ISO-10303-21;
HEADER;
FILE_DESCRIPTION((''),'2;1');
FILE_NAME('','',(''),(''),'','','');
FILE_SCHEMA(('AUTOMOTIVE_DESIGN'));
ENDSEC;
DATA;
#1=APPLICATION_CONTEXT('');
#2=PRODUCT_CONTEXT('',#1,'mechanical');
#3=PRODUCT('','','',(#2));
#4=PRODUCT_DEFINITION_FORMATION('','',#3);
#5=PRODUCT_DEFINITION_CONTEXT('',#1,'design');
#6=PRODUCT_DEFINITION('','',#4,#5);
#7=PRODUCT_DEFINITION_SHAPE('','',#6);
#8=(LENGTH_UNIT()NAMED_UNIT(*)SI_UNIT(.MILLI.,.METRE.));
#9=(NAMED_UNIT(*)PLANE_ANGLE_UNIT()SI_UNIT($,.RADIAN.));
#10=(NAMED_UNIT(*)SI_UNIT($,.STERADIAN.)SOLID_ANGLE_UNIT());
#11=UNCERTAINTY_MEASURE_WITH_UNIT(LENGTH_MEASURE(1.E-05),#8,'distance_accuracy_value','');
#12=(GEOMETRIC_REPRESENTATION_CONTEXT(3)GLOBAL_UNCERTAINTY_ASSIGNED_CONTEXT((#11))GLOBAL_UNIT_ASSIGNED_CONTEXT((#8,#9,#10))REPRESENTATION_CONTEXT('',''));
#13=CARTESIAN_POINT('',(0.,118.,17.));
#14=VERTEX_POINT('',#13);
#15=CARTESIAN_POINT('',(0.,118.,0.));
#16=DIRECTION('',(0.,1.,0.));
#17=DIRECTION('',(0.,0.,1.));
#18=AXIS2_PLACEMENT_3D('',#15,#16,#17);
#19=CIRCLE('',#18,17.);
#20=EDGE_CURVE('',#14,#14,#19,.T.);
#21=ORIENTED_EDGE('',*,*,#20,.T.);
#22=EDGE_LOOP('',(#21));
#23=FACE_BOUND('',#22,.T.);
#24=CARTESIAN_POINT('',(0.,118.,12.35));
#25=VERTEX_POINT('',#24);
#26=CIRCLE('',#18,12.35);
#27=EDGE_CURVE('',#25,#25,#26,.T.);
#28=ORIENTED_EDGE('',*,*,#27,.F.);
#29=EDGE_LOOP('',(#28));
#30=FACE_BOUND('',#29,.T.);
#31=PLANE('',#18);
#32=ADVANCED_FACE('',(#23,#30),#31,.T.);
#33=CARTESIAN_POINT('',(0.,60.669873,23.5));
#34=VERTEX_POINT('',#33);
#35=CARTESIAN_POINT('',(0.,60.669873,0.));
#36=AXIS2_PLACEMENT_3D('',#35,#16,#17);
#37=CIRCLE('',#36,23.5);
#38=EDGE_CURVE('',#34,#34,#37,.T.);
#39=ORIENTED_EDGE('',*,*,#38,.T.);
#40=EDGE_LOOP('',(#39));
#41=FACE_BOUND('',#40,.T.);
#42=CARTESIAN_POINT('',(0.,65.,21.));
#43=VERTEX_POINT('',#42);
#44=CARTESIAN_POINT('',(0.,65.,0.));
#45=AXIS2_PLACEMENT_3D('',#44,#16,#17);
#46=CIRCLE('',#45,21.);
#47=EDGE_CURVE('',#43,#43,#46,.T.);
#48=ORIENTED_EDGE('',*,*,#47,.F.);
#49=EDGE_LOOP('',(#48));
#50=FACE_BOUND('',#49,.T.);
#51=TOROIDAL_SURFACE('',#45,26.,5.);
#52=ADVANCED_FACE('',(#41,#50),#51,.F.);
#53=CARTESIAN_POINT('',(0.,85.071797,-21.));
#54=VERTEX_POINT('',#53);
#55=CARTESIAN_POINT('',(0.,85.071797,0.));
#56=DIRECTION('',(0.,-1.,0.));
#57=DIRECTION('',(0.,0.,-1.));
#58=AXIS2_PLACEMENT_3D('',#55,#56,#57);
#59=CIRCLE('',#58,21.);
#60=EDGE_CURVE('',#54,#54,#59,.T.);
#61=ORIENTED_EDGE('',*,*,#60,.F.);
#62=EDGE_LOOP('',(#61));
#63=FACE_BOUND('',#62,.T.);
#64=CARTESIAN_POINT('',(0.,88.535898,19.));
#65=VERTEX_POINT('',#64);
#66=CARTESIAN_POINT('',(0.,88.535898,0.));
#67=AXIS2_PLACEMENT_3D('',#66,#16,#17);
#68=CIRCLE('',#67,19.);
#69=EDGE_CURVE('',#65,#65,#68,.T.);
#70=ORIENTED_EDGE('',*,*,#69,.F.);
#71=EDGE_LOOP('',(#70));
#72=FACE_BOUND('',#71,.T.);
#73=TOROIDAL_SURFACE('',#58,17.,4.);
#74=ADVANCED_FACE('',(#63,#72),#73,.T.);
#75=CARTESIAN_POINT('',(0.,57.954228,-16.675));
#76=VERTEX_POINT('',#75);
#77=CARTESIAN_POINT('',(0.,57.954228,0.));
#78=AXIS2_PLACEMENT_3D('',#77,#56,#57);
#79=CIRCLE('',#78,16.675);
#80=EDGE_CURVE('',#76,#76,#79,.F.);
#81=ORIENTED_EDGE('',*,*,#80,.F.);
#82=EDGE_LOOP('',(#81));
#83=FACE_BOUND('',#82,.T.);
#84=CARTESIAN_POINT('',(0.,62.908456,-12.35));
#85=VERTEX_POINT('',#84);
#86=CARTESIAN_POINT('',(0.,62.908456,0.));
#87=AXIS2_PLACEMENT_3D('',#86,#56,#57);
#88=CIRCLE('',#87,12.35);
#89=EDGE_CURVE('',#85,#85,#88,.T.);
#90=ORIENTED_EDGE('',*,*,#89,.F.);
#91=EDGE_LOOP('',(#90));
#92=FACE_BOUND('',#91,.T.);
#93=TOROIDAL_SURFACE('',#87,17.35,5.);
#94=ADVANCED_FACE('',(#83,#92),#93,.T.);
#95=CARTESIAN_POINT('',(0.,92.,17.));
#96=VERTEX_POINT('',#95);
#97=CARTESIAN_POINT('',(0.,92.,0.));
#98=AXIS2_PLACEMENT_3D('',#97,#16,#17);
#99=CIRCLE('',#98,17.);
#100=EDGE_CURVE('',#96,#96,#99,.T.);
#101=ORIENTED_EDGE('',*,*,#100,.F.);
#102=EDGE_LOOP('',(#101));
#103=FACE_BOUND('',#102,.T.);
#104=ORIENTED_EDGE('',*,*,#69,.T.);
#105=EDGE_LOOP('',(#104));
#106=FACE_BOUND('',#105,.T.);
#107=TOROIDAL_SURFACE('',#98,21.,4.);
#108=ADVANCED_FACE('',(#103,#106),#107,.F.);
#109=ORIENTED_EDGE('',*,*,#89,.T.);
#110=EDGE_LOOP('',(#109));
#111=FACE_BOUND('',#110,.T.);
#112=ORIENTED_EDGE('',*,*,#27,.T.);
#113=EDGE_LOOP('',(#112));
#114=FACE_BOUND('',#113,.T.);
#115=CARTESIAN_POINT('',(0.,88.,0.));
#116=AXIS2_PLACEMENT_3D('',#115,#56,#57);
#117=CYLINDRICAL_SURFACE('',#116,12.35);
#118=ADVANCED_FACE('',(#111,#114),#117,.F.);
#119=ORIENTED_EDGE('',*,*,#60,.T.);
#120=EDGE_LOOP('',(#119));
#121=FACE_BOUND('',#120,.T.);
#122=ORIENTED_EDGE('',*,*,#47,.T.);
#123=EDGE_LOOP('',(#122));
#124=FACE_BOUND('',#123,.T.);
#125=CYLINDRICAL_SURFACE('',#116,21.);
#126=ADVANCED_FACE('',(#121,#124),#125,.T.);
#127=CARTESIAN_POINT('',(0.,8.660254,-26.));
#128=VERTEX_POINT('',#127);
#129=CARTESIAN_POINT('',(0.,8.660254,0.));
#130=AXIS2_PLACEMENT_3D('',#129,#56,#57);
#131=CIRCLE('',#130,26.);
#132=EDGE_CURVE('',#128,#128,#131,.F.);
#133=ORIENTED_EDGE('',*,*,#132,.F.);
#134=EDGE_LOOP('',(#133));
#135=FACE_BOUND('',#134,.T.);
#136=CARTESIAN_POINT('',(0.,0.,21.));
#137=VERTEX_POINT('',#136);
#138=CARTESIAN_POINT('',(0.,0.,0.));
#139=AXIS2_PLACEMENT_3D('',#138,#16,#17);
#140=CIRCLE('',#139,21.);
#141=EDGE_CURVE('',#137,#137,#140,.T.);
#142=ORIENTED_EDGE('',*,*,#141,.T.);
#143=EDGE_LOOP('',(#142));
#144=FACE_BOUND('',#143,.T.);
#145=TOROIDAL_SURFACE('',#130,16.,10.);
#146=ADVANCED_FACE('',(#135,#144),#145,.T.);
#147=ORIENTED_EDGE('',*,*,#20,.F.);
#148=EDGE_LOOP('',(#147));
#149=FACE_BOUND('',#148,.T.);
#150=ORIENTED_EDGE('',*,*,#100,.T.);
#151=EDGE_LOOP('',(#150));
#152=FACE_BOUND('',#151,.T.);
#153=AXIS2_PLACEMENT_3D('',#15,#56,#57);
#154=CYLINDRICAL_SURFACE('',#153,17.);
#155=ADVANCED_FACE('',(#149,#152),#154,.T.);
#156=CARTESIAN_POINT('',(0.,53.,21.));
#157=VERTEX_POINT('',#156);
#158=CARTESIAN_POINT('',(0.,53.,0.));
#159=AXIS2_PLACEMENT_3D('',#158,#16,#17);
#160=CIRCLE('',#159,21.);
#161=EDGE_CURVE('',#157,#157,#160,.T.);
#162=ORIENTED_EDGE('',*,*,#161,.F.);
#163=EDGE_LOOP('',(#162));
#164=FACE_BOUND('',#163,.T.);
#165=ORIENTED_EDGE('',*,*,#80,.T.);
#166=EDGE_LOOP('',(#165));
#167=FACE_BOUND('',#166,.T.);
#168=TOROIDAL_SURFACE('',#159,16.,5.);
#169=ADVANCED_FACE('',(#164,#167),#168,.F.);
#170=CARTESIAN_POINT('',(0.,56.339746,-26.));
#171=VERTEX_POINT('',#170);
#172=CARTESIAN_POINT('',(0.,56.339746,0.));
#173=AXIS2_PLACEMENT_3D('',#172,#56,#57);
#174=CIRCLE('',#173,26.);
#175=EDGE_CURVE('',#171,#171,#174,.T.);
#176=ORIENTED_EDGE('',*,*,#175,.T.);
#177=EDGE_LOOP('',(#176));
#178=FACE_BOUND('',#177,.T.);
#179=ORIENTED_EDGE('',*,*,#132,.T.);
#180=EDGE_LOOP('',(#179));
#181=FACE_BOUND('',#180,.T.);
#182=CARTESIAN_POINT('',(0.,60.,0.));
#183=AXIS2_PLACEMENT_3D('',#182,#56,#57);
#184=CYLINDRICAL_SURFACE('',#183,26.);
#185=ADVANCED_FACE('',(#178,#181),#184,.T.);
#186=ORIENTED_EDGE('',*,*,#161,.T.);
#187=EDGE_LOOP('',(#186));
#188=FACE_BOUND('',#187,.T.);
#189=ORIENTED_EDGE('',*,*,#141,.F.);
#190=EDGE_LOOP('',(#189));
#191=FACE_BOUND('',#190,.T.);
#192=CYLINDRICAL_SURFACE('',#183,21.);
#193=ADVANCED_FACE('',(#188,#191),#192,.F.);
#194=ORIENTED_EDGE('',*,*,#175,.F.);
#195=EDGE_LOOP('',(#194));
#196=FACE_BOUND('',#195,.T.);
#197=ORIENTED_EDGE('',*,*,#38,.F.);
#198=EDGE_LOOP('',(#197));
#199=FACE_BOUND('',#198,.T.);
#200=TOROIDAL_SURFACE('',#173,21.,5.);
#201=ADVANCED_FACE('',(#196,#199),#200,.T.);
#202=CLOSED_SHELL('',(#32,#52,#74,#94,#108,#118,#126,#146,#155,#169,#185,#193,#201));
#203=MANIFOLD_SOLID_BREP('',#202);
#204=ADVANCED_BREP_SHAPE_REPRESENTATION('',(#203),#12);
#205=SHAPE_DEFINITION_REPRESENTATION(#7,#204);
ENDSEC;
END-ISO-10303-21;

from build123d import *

# Parameters (mm, degrees)
SKETCH_1_R      = 26
SKETCH_1_R_2    = 21
EXTRUDE_1_DEPTH = 60
FILLET_1_R      = 10
EXTRUDE_START   = -2
SKETCH_2_R      = 21
SKETCH_2_R_2    = 12.35
EXTRUDE_2_DEPTH = 30
SKETCH_3_R      = 17
SKETCH_3_R_2    = 12.35
EXTRUDE_3_DEPTH = 30
FILLET_3_R      = 4
FILLET_4_R      = 4
FILLET_6_R      = 5
FILLET_7_R      = 5
FILLET_8_R      = 5
FILLET_9_R      = 5


# Some blends are built 0.0001 mm under size
with BuildPart() as part:
    # Эскиз1 → Вытянуть1 (new body)
    with BuildSketch(Plane(origin=(0, 0, 0), x_dir=(1, 0, 0), z_dir=(0, 1, 0))):
        with Locations(Location((0, 0, 0), (0, 0, 270))):
            Circle(SKETCH_1_R)
        with Locations(Location((0, 0, 0), (0, 0, 270))):
            Circle(SKETCH_1_R_2, mode=Mode.SUBTRACT)
    extrude(amount=EXTRUDE_1_DEPTH)

    # Скругление1
    # the kernel refuses this fillet: 10 mm, written as the material it takes off along each edge
    with BuildSketch(Plane(origin=(0, 0, 0), x_dir=(0, 0, 1), z_dir=(-1, 0, 0))) as fillet_1_piece_1:
        with BuildLine():
            CenterArc((16, 8.660254038), FILLET_1_R, 300, 60)
            Line((21, 0), (21.1, -0.173205081))
            ThreePointArc((21.1, -0.173205081), (23.5, -0.2), (26, -0.2))
            Line((26, -0.2), (26.2, 0))
            Line((26.2, 0), (26.2, 8.660254038))
            Line((26.2, 8.660254038), (26, 8.660254038))
        make_face()
    revolve(axis=Axis((0, 0, 0), (0, 1, 0)), mode=Mode.SUBTRACT)

    # Эскиз2 → Вытянуть2 (add)
    with BuildSketch(Plane(origin=(0, 60, 0), x_dir=(1, 0, 0), z_dir=(0, 1, 0)).offset(EXTRUDE_START)):
        with Locations(Location((0, 0, 0), (0, 0, 270))):
            Circle(SKETCH_2_R)
        with Locations(Location((0, 0, 0), (0, 0, 270))):
            Circle(SKETCH_2_R_2, mode=Mode.SUBTRACT)
    extrude(amount=EXTRUDE_2_DEPTH)

    # Эскиз3 → Вытянуть3 (add)
    with BuildSketch(Plane(origin=(0, 88, 0), x_dir=(1, 0, 0), z_dir=(0, 1, 0))):
        with Locations(Location((0, 0, 0), (0, 0, 270))):
            Circle(SKETCH_3_R)
        with Locations(Location((0, 0, 0), (0, 0, 270))):
            Circle(SKETCH_3_R_2, mode=Mode.SUBTRACT)
    extrude(amount=EXTRUDE_3_DEPTH)

    # Скругление3
    fillet_3_edges = [part.edges().sort_by_distance(p)[0] for p in [
        (0, 88, -17),
    ]]
    fillet(fillet_3_edges, radius=FILLET_3_R - 0.0001)  # a hair under: the kernel refuses the full size

    # Скругление4
    fillet_4_edges = [part.edges().sort_by_distance(p)[0] for p in [
        (0, 88, -21),
    ]]
    fillet(fillet_4_edges, radius=FILLET_4_R)

    # Скругление6
    fillet_6_edges = [part.edges().sort_by_distance(p)[0] for p in [
        (0, 60, -21),
    ]]
    fillet(fillet_6_edges, radius=FILLET_6_R - 0.0001)  # a hair under: the kernel refuses the full size

    # Скругление7
    fillet_7_edges = [part.edges().sort_by_distance(p)[0] for p in [
        (0, 60, -26),
    ]]
    fillet(fillet_7_edges, radius=FILLET_7_R)

    # Скругление8
    fillet_8_edges = [part.edges().sort_by_distance(p)[0] for p in [
        (0, 58, -21),
    ]]
    fillet(fillet_8_edges, radius=FILLET_8_R)

    # Скругление9
    fillet_9_edges = [part.edges().sort_by_distance(p)[0] for p in [
        (0, 58, -12.35),
    ]]
    fillet(fillet_9_edges, radius=FILLET_9_R)


solid = part.part
